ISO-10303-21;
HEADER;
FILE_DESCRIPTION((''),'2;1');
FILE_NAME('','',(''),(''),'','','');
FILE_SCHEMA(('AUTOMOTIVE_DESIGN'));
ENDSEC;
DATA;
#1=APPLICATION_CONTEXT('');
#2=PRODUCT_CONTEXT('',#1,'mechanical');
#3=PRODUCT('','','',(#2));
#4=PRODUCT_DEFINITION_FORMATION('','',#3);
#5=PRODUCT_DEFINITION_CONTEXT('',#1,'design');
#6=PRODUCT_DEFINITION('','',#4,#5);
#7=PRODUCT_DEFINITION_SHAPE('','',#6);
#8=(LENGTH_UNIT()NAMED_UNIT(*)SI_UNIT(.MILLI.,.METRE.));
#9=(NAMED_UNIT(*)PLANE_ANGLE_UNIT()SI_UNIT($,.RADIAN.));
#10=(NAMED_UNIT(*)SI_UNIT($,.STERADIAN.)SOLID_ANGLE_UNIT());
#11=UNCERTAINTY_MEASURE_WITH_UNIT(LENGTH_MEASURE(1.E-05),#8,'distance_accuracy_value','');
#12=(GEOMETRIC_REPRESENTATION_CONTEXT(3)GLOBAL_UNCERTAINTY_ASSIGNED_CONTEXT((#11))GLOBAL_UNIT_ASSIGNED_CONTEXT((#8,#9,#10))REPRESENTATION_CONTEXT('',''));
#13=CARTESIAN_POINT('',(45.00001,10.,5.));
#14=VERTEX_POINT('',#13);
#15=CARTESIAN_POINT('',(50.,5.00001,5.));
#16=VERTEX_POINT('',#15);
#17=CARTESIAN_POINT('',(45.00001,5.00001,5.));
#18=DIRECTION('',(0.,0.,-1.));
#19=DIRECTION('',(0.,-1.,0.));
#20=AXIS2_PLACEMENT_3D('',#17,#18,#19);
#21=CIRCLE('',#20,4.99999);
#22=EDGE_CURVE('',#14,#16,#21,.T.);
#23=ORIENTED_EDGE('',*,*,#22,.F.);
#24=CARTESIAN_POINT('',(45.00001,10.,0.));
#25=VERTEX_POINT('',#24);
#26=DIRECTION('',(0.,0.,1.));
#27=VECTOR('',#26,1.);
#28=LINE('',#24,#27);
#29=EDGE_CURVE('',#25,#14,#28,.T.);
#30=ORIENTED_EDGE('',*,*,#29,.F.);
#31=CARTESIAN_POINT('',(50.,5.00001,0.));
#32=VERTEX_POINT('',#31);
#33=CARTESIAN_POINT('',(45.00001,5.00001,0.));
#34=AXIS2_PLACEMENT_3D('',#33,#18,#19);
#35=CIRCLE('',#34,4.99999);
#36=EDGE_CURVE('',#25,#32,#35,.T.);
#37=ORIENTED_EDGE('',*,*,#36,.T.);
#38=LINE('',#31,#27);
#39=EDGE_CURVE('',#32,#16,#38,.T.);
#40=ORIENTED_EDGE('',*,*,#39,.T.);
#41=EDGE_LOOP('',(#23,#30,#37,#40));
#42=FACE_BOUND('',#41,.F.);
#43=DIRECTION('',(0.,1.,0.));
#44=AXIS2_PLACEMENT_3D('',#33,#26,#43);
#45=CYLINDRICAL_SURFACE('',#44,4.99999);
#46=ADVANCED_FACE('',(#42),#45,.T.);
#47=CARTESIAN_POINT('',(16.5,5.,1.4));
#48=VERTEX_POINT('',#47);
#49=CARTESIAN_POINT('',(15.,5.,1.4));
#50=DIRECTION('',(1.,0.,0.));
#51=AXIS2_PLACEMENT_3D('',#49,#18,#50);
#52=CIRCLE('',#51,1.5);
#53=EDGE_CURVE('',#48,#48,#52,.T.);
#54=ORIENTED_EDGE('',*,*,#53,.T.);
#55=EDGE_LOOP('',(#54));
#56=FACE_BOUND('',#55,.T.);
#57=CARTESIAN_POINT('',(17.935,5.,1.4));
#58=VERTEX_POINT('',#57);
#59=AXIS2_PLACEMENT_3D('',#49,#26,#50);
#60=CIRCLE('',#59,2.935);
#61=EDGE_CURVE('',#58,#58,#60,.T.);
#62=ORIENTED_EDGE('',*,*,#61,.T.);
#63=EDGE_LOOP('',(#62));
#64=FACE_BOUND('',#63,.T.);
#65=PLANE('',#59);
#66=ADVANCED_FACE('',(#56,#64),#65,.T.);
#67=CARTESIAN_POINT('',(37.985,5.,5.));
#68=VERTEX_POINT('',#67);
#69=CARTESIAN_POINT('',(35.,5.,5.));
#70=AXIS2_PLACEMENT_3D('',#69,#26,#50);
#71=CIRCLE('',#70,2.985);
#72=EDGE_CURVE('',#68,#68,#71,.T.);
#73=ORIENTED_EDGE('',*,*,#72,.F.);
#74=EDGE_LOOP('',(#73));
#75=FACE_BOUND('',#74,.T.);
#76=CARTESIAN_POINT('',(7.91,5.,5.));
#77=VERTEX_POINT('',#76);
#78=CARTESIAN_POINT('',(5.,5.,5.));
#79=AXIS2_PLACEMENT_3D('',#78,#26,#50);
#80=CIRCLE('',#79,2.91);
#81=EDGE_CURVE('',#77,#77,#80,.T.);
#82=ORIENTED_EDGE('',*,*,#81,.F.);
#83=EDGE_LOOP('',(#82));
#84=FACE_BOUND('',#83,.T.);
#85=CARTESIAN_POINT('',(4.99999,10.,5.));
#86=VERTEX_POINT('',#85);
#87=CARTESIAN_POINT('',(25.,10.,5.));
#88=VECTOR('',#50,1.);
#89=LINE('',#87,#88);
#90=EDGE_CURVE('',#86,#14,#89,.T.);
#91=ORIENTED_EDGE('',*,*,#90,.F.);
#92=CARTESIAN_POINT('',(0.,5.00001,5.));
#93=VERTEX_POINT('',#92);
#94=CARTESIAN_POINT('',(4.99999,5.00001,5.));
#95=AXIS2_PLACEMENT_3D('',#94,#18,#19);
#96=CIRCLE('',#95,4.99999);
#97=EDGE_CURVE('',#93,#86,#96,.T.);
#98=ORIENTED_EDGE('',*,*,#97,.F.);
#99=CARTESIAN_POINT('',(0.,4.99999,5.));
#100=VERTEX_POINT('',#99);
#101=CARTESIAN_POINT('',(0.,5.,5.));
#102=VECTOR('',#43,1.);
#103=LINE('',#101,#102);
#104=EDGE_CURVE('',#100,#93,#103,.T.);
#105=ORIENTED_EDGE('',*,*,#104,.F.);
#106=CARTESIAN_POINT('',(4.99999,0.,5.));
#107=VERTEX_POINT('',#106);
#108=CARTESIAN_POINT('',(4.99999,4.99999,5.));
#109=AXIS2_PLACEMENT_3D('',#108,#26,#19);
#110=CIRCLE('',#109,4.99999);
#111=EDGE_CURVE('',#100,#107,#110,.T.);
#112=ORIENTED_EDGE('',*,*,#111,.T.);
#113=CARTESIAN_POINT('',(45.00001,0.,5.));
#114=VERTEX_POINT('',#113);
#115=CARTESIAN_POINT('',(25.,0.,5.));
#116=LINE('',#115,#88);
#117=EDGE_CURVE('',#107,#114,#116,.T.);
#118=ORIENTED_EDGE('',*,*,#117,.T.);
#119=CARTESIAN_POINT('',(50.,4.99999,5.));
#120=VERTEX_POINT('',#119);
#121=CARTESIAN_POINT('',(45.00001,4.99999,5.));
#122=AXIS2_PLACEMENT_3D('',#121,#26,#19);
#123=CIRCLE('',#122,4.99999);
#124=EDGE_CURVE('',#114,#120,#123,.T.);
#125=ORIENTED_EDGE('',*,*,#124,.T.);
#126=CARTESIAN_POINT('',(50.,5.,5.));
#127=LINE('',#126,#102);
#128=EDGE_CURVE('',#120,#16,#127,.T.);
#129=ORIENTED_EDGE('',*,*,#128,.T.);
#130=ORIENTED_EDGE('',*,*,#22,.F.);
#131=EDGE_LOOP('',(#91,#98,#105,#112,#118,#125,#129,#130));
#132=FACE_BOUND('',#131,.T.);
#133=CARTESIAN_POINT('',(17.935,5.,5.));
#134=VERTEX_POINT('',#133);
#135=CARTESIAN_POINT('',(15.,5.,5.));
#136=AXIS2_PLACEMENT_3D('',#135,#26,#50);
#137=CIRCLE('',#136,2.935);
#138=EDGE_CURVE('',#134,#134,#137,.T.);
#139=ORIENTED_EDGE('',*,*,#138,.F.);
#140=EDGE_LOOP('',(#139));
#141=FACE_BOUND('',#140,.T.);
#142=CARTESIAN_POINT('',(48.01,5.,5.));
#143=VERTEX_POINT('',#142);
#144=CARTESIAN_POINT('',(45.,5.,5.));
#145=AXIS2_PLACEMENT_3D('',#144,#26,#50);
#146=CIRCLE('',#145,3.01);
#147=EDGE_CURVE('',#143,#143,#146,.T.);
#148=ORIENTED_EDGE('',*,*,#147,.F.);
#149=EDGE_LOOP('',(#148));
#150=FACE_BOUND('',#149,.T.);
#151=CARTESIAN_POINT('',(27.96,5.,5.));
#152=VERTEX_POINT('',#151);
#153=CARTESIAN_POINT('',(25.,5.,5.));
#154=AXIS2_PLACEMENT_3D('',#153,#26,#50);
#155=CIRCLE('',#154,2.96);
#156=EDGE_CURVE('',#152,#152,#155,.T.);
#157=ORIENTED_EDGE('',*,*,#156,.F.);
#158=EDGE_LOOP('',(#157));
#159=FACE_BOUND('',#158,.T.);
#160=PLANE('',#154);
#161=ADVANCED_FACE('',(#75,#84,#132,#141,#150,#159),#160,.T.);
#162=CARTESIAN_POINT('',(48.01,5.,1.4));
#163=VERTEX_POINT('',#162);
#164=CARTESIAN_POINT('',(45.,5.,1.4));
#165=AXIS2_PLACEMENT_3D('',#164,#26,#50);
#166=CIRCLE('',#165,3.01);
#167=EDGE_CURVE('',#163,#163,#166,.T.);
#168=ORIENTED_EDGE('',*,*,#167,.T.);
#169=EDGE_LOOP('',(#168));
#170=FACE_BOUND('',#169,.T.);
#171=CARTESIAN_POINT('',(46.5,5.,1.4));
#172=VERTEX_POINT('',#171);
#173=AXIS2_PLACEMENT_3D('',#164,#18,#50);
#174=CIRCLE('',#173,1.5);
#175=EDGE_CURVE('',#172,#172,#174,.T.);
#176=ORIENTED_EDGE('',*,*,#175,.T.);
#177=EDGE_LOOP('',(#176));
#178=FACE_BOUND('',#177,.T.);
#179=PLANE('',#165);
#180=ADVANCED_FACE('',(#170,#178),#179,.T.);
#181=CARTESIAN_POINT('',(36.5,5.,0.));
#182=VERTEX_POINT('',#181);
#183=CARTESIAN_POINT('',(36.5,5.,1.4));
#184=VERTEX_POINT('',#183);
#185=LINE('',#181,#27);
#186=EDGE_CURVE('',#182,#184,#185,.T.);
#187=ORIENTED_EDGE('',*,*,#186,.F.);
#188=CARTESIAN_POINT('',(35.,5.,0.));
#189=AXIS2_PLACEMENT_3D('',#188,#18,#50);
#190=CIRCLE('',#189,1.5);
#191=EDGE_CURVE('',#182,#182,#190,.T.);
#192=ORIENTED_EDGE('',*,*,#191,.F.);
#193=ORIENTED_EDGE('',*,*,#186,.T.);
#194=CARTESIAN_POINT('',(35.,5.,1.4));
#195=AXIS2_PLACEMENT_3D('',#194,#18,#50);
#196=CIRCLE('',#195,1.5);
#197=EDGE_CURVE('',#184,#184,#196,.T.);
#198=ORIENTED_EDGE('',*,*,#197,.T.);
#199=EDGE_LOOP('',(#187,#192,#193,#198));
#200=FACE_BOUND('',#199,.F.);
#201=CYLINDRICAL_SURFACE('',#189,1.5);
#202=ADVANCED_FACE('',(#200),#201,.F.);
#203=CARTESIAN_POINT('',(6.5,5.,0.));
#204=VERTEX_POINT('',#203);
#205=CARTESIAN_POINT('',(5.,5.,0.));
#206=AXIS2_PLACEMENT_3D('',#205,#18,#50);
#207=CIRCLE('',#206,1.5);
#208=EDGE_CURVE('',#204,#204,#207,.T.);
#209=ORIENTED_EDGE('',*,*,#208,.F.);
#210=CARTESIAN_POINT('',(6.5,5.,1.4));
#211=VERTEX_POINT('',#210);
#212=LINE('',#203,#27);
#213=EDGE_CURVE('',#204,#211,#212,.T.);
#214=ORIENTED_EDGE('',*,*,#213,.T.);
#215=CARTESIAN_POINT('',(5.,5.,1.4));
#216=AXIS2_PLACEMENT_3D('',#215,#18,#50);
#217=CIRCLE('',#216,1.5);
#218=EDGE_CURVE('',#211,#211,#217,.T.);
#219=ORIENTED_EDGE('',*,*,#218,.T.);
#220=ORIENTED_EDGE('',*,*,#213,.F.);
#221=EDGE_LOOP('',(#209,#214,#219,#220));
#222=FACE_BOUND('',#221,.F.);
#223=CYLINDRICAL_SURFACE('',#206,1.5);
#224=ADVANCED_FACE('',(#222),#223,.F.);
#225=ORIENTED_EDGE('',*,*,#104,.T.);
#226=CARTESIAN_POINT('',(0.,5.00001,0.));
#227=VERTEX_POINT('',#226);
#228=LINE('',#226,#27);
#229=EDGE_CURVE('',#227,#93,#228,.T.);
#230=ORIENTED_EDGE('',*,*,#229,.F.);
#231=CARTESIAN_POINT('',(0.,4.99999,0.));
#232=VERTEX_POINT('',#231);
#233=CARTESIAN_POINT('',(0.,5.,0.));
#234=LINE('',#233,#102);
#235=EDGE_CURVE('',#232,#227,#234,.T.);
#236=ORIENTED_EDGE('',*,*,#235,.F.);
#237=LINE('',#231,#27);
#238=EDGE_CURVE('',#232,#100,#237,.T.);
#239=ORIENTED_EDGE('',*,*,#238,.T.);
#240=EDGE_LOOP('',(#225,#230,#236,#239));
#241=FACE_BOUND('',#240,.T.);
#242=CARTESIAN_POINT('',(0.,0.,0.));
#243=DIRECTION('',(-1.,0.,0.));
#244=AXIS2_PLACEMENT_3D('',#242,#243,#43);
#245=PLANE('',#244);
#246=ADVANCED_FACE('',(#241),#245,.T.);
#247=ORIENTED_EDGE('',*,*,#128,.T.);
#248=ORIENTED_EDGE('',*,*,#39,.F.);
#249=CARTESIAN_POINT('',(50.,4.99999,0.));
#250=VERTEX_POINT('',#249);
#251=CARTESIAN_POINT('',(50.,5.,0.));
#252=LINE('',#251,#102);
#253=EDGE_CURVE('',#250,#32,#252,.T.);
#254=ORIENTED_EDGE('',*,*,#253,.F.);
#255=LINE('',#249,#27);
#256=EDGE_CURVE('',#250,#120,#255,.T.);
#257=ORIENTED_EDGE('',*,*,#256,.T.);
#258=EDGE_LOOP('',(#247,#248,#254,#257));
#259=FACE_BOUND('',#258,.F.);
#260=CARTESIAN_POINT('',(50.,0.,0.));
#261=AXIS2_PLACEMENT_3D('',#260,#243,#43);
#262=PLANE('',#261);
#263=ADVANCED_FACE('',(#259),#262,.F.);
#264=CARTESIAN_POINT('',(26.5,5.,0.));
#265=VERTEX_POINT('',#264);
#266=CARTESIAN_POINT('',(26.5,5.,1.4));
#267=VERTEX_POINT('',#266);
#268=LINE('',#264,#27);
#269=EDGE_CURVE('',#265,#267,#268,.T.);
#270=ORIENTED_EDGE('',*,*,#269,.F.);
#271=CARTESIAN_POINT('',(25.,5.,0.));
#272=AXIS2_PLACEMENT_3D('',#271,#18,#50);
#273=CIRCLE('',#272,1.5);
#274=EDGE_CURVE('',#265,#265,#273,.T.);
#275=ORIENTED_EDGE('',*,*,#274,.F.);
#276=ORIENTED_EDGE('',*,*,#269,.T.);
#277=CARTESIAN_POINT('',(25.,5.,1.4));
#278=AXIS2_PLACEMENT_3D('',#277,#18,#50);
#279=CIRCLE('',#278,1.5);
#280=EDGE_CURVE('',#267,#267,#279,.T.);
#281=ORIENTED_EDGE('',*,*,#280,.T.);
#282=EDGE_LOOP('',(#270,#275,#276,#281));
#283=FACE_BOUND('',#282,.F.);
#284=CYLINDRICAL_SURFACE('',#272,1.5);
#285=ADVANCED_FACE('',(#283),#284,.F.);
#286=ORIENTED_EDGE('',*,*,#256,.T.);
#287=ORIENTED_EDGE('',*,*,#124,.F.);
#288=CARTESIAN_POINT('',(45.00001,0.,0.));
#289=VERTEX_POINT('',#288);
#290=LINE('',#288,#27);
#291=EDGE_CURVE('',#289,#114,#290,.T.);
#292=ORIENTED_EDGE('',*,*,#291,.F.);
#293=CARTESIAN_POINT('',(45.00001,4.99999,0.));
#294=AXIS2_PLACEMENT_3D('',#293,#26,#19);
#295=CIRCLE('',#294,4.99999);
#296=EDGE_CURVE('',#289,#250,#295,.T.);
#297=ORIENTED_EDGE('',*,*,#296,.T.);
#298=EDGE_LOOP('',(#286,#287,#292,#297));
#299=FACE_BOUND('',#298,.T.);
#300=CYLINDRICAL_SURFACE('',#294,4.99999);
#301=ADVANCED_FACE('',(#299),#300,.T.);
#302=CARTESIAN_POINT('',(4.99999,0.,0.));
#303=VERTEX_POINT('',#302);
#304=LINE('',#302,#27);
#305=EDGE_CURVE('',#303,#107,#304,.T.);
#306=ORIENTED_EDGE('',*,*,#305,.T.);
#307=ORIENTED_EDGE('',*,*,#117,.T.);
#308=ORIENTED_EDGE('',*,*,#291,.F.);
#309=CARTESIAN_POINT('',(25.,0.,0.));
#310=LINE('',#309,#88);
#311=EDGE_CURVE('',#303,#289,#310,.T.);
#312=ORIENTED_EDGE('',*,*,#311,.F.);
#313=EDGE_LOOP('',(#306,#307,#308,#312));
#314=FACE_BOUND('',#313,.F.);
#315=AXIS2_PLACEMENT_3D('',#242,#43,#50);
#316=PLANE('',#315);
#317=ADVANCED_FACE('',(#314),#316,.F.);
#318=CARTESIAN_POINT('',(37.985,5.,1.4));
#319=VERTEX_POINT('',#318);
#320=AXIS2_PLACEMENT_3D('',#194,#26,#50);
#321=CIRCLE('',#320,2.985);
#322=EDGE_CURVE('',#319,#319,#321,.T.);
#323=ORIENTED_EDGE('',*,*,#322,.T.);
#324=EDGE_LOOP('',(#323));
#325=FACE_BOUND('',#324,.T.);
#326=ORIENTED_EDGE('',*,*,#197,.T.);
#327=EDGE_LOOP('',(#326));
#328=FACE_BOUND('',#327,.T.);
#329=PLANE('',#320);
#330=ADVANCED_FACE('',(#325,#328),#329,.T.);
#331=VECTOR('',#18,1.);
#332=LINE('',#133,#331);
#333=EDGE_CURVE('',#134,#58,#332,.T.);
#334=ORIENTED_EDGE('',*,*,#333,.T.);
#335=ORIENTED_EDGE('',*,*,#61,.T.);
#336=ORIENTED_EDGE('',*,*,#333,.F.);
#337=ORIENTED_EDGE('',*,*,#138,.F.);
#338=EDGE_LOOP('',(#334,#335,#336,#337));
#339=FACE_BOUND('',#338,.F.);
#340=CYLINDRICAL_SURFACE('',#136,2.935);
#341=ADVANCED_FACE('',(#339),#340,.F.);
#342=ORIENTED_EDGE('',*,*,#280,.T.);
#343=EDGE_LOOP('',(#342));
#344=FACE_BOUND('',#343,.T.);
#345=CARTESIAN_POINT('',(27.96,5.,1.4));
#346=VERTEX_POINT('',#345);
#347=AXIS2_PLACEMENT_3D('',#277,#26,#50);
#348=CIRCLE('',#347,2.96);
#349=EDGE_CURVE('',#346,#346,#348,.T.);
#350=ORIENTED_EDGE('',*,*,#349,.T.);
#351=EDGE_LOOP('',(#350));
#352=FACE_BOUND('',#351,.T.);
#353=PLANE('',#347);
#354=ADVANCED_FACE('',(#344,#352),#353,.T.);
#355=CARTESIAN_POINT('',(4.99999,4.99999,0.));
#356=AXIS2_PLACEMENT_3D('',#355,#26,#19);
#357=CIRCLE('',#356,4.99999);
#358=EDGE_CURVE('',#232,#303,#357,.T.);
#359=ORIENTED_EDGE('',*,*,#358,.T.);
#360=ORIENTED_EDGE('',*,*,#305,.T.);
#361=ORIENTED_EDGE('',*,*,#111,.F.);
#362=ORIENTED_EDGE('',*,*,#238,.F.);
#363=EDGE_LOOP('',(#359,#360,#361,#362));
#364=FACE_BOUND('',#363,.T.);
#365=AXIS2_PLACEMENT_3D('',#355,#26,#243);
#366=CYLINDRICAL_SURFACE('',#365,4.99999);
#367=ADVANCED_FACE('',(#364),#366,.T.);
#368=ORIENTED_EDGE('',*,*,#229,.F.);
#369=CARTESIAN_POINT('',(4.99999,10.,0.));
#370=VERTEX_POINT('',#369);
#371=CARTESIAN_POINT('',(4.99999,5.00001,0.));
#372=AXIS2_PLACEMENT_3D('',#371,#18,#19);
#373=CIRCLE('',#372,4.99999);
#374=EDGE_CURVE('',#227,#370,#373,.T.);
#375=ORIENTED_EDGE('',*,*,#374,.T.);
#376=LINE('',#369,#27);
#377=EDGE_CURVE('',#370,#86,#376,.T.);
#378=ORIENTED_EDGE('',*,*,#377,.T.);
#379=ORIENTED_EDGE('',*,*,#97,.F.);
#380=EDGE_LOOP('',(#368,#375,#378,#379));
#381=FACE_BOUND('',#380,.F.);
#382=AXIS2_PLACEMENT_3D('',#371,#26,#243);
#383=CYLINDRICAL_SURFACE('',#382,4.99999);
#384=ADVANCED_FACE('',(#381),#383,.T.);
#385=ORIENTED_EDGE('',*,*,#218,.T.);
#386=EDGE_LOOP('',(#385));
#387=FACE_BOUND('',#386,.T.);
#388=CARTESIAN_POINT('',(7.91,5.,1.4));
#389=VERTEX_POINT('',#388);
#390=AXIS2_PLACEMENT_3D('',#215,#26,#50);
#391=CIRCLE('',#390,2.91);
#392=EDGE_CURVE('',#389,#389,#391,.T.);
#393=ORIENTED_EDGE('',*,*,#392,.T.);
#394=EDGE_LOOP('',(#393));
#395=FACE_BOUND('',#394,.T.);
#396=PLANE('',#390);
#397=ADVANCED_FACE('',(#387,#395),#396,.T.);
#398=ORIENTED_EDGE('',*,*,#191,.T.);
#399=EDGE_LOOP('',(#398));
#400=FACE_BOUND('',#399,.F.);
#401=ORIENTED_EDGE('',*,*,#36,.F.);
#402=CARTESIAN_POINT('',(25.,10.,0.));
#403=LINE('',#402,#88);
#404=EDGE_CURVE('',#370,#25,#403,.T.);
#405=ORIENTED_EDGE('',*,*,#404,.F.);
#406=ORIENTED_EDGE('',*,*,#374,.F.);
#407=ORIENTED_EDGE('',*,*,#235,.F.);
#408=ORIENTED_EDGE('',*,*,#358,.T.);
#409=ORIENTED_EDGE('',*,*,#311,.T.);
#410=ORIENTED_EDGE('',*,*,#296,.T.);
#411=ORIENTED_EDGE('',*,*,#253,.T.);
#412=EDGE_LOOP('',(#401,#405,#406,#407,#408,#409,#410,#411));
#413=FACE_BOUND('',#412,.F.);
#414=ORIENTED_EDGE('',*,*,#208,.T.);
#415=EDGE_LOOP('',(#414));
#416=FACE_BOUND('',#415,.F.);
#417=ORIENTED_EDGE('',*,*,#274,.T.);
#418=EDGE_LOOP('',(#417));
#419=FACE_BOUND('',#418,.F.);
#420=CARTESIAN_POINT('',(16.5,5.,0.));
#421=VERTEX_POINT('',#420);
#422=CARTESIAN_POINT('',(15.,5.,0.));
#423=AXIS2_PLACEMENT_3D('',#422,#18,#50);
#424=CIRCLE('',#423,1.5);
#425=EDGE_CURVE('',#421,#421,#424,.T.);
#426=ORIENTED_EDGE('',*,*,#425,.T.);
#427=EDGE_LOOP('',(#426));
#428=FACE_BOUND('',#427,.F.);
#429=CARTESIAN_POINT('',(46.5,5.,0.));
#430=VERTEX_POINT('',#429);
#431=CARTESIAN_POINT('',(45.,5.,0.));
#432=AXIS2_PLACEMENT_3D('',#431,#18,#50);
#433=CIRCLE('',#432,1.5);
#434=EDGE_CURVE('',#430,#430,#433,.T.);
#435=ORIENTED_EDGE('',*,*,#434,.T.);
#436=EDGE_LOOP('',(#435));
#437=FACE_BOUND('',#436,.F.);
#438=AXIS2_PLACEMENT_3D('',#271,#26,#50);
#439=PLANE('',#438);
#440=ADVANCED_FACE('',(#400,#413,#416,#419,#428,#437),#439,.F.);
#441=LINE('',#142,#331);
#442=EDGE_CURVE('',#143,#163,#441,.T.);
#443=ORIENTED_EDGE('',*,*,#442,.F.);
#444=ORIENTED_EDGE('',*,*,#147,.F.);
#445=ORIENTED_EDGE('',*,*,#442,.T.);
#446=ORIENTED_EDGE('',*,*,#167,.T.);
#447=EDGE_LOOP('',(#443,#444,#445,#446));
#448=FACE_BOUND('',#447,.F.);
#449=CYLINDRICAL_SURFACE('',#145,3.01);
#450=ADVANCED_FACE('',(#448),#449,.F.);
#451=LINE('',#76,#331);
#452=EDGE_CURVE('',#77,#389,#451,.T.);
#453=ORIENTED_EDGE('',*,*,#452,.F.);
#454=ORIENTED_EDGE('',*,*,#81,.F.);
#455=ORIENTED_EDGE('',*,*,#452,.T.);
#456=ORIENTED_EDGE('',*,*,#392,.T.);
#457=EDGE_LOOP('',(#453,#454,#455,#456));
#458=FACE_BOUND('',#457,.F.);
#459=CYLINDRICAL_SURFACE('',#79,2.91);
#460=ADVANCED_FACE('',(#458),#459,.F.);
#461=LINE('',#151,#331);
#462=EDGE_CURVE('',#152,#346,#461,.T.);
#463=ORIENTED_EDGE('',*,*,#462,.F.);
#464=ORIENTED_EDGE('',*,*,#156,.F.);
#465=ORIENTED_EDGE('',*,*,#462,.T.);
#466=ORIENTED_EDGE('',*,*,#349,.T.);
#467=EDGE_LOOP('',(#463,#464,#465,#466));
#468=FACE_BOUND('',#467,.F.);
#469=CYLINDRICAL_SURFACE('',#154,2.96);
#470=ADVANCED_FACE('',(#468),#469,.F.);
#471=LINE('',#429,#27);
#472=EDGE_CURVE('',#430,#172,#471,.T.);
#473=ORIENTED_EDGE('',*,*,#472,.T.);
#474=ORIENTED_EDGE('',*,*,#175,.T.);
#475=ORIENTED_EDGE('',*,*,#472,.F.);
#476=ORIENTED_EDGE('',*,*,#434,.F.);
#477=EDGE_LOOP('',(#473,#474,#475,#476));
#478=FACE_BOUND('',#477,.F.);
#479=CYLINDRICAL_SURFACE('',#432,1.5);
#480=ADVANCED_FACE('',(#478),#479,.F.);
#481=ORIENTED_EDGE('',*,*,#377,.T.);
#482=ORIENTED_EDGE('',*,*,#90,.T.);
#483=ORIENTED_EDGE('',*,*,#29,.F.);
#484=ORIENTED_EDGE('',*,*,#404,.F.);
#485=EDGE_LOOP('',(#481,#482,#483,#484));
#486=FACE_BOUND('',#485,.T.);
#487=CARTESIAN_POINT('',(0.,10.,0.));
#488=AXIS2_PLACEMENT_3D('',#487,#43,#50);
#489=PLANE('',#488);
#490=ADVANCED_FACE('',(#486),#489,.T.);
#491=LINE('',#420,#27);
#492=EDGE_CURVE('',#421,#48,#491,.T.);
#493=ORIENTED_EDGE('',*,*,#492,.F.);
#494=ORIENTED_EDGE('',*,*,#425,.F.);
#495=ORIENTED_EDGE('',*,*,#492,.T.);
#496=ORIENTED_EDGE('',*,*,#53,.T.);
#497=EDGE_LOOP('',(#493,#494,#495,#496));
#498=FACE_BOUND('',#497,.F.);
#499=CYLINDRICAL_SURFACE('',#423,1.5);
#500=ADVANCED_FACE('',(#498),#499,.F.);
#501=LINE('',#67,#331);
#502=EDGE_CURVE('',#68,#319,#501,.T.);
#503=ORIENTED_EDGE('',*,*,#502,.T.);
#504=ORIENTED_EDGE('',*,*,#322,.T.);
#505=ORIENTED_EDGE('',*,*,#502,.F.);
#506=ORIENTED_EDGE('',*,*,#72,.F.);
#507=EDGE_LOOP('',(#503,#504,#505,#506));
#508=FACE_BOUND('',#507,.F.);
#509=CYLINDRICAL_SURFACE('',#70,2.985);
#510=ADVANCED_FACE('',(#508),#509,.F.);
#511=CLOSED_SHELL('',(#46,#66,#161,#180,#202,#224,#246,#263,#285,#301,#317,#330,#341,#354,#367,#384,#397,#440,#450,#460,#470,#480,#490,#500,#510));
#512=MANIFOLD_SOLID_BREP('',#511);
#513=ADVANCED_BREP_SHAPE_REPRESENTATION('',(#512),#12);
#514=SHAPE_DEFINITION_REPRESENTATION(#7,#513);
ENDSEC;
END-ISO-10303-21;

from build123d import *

# Parameters (mm, degrees)
F0_W     = 50
F0_H     = 10
F1_DEPTH = 5
F2_R     = 1.5
F3_DEPTH = 5.001
F5_R     = 4.99999
F4_R     = 2.91
F4_R_2   = 2.935
F4_R_3   = 2.96
F4_R_4   = 2.985
F4_R_5   = 3.01
F6_DEPTH = 3.6


# Not quite as in the source:
# - a fillet or chamfer is up to 0.001 mm smaller than in the source, because OpenCascade refuses the exact size


with BuildPart() as f1:
    # F0 (on Top) → F1 (new body)
    with BuildSketch(Plane.XY):
        with Locations((25, 5)):
            Rectangle(F0_W, F0_H)
    extrude(amount=F1_DEPTH)

    # F2 (on face) → F3 (cut, through all)
    with BuildSketch(Plane(origin=(0, 0, 0), x_dir=(1, 0, 0), z_dir=(0, 0, -1))):
        with Locations((5, -5)):
            Circle(F2_R)
        with Locations((15, -5)):
            Circle(F2_R)
        with Locations((25, -5)):
            Circle(F2_R)
        with Locations((35, -5)):
            Circle(F2_R)
        with Locations((45, -5)):
            Circle(F2_R)
    extrude(amount=-F3_DEPTH, mode=Mode.SUBTRACT)

    # F5 (radius 5 in the source; OpenCascade refuses exactly that, so slightly less here)
    f5_edges = [f1.edges().sort_by_distance(p)[0] for p in [
        (0, 0, 2.5),
        (0, 10, 2.5),
        (50, 0, 2.5),
        (50, 10, 2.5),
    ]]
    fillet(f5_edges, radius=F5_R)

    # F4 (on face) → F6 (cut)
    with BuildSketch(Plane.XY.offset(5)):
        with Locations((5, 5)):
            Circle(F4_R)
        with Locations((15, 5)):
            Circle(F4_R_2)
        with Locations((25, 5)):
            Circle(F4_R_3)
        with Locations((35, 5)):
            Circle(F4_R_4)
        with Locations((45, 5)):
            Circle(F4_R_5)
    extrude(amount=-F6_DEPTH, mode=Mode.SUBTRACT)


solid = f1.part
